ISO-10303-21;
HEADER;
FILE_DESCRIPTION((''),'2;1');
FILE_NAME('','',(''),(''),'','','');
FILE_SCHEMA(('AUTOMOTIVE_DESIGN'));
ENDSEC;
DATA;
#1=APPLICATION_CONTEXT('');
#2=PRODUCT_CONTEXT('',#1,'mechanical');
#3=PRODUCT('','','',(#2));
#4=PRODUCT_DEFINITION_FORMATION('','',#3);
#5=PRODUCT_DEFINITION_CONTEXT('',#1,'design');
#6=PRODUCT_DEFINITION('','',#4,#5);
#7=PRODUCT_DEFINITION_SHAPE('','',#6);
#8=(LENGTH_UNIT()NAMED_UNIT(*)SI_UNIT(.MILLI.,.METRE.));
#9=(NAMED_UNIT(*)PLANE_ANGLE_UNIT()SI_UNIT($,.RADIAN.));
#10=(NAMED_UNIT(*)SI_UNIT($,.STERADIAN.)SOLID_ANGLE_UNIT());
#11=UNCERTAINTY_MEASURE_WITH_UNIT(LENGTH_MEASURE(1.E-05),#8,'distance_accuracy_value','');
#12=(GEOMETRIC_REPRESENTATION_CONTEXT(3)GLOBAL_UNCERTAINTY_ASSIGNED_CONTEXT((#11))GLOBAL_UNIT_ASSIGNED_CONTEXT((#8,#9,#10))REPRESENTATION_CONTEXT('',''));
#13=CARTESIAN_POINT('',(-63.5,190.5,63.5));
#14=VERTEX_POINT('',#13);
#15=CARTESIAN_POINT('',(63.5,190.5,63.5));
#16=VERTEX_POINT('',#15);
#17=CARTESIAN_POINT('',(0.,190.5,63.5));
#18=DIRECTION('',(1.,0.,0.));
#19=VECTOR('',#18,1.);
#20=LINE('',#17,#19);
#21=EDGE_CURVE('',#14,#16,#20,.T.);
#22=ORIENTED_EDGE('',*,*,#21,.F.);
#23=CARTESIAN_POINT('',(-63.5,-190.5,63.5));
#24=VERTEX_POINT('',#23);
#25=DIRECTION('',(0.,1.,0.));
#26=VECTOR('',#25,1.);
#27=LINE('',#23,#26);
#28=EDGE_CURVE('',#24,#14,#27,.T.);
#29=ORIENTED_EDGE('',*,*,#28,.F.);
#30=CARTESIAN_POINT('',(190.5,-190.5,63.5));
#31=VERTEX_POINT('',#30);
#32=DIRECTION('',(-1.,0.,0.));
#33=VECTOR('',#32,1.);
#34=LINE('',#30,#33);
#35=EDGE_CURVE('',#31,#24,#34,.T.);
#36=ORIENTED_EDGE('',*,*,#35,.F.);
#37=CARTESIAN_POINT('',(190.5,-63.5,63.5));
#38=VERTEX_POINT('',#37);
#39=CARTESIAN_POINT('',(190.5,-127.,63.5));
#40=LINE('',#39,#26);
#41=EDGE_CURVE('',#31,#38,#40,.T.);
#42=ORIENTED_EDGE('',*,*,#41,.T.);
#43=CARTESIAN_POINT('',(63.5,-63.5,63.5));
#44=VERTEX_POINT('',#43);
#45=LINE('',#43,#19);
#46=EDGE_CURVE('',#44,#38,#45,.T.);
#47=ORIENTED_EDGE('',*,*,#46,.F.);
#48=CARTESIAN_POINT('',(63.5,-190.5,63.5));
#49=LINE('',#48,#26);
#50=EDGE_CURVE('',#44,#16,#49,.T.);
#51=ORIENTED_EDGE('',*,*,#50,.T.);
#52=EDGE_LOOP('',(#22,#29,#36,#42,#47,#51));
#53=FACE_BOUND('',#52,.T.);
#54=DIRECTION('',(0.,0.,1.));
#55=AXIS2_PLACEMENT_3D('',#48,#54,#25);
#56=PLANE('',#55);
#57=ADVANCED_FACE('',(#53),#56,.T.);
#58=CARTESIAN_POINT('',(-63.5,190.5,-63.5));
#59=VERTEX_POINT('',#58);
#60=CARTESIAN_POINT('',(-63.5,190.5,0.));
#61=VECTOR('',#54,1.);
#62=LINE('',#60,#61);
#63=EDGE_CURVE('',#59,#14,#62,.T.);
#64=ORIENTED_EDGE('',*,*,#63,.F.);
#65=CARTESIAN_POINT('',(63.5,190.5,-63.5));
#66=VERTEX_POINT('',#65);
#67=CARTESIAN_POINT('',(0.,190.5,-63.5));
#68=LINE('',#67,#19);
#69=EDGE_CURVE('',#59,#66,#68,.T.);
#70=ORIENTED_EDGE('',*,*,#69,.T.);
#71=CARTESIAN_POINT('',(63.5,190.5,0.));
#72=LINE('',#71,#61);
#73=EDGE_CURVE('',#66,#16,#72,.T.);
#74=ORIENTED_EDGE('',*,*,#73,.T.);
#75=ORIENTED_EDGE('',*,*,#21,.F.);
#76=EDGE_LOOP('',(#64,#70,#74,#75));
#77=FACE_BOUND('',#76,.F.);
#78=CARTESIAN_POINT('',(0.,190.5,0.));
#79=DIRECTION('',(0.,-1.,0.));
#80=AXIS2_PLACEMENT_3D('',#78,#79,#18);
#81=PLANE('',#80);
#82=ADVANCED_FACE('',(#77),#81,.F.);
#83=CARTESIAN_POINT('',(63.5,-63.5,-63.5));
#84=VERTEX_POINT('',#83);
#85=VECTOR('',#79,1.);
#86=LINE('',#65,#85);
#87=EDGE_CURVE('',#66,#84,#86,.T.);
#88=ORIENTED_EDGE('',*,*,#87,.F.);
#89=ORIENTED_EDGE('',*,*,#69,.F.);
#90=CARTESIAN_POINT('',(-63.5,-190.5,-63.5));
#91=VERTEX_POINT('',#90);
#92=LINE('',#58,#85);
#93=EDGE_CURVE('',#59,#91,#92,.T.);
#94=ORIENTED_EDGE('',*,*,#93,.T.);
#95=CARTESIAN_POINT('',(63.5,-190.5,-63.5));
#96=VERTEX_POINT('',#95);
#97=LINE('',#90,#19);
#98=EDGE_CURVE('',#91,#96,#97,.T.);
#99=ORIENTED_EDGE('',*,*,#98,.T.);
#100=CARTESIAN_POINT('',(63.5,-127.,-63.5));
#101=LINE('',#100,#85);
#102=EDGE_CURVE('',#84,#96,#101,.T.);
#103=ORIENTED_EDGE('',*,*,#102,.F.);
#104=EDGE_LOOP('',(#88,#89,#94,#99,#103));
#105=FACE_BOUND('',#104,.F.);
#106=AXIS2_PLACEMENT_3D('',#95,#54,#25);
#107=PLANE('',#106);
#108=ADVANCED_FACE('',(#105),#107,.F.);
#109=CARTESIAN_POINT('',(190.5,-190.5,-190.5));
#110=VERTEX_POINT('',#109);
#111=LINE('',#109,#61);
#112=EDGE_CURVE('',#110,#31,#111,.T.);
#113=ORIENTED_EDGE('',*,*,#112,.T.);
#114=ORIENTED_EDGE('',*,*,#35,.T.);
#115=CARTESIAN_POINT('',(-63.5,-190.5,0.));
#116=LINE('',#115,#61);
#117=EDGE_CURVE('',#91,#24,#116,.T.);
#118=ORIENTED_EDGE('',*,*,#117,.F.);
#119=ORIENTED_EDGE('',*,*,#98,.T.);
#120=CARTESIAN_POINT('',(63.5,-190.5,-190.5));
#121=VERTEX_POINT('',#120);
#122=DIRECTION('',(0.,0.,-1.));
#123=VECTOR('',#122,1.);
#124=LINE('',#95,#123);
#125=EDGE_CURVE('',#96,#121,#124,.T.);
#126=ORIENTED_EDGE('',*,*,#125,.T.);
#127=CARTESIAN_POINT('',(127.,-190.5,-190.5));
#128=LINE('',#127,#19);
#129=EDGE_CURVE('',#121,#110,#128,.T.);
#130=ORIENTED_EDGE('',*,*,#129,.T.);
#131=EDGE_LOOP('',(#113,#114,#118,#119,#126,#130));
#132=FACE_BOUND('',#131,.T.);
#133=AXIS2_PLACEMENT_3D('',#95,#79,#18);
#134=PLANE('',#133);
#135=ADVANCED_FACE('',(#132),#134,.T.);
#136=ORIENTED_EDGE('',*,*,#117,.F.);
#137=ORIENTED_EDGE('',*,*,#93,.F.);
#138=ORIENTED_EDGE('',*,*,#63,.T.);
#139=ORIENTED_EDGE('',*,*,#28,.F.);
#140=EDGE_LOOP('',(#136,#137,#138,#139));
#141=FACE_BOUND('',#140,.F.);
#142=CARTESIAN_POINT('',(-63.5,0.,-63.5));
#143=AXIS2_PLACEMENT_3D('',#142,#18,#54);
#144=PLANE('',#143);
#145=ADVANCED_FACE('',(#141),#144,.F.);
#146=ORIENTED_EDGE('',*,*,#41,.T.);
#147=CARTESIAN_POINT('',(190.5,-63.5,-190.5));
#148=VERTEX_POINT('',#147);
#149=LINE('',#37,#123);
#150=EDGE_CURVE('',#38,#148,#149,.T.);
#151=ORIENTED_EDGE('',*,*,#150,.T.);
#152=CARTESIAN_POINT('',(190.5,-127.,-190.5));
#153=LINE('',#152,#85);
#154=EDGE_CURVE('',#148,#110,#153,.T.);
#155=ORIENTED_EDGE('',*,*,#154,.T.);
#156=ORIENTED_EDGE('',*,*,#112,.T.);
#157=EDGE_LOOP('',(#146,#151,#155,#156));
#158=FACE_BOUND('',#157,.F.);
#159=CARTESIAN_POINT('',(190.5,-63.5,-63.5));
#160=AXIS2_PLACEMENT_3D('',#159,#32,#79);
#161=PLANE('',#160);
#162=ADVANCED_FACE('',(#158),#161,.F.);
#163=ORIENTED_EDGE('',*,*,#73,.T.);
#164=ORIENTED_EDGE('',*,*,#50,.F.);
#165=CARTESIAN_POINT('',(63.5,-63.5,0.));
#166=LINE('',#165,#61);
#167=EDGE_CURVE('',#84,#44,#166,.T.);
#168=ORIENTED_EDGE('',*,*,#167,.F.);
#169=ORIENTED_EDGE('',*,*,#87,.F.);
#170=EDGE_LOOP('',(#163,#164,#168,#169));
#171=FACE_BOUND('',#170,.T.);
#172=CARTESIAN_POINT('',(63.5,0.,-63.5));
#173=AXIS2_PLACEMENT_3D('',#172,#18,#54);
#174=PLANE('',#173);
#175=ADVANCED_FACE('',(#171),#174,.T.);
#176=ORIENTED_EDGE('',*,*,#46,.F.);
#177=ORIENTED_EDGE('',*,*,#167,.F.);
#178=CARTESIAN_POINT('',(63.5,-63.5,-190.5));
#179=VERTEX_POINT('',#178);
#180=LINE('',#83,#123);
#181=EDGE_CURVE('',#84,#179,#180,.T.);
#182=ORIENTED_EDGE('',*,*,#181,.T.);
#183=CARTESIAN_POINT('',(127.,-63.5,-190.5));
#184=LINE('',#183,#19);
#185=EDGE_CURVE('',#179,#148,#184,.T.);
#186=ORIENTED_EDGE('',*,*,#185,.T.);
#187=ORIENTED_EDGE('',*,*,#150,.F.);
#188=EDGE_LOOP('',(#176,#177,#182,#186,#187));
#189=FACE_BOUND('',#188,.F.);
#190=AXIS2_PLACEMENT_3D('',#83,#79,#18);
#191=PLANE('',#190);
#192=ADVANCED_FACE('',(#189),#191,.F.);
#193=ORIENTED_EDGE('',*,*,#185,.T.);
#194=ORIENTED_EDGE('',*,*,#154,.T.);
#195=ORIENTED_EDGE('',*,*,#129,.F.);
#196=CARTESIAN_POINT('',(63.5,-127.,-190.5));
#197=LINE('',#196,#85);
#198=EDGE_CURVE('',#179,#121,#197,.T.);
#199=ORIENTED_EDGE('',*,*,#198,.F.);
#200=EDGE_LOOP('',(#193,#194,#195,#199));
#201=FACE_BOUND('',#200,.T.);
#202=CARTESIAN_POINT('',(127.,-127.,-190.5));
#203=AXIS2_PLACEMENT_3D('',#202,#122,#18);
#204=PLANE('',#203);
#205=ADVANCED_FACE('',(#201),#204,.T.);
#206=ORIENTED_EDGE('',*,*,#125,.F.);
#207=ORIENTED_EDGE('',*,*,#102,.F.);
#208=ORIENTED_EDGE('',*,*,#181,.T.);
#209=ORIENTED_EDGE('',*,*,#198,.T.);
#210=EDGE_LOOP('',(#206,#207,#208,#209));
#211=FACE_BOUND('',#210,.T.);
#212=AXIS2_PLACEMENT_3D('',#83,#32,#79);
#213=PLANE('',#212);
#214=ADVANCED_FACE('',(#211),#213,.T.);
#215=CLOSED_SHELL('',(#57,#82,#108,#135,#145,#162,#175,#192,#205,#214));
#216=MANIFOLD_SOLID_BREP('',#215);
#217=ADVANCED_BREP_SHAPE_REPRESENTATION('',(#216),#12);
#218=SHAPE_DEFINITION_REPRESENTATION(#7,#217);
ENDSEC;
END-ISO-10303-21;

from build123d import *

# Parameters (mm, degrees)
F1_W     = 127
F1_H     = 127
F2_DEPTH = 190.5
F3_W     = 127
F3_H     = 127
F4_DEPTH = 127
F5_W     = 127
F5_H     = 127
F6_DEPTH = 127


# Not quite as in the source:
# - a variable given as a bare number and used for a length is read in inches; the dataset says mm whatever the document's units were


with BuildPart() as f2:
    # F1 (on Front) → F2 (new body, symmetric)
    with BuildSketch(Plane.XZ):
        Rectangle(F1_W, F1_H)
    extrude(amount=F2_DEPTH, both=True)

    # F3 (on face) → F4 (join)
    with BuildSketch(Plane.YZ.offset(63.5)):
        with Locations((-127, 0)):
            Rectangle(F3_W, F3_H)
    extrude(amount=F4_DEPTH)

    # F5 (on face) → F6 (join)
    with BuildSketch(Plane(origin=(0, 0, -63.5), x_dir=(1, 0, 0), z_dir=(0, 0, -1))):
        with Locations((127, 127)):
            Rectangle(F5_W, F5_H)
    extrude(amount=F6_DEPTH)


solid = f2.part
